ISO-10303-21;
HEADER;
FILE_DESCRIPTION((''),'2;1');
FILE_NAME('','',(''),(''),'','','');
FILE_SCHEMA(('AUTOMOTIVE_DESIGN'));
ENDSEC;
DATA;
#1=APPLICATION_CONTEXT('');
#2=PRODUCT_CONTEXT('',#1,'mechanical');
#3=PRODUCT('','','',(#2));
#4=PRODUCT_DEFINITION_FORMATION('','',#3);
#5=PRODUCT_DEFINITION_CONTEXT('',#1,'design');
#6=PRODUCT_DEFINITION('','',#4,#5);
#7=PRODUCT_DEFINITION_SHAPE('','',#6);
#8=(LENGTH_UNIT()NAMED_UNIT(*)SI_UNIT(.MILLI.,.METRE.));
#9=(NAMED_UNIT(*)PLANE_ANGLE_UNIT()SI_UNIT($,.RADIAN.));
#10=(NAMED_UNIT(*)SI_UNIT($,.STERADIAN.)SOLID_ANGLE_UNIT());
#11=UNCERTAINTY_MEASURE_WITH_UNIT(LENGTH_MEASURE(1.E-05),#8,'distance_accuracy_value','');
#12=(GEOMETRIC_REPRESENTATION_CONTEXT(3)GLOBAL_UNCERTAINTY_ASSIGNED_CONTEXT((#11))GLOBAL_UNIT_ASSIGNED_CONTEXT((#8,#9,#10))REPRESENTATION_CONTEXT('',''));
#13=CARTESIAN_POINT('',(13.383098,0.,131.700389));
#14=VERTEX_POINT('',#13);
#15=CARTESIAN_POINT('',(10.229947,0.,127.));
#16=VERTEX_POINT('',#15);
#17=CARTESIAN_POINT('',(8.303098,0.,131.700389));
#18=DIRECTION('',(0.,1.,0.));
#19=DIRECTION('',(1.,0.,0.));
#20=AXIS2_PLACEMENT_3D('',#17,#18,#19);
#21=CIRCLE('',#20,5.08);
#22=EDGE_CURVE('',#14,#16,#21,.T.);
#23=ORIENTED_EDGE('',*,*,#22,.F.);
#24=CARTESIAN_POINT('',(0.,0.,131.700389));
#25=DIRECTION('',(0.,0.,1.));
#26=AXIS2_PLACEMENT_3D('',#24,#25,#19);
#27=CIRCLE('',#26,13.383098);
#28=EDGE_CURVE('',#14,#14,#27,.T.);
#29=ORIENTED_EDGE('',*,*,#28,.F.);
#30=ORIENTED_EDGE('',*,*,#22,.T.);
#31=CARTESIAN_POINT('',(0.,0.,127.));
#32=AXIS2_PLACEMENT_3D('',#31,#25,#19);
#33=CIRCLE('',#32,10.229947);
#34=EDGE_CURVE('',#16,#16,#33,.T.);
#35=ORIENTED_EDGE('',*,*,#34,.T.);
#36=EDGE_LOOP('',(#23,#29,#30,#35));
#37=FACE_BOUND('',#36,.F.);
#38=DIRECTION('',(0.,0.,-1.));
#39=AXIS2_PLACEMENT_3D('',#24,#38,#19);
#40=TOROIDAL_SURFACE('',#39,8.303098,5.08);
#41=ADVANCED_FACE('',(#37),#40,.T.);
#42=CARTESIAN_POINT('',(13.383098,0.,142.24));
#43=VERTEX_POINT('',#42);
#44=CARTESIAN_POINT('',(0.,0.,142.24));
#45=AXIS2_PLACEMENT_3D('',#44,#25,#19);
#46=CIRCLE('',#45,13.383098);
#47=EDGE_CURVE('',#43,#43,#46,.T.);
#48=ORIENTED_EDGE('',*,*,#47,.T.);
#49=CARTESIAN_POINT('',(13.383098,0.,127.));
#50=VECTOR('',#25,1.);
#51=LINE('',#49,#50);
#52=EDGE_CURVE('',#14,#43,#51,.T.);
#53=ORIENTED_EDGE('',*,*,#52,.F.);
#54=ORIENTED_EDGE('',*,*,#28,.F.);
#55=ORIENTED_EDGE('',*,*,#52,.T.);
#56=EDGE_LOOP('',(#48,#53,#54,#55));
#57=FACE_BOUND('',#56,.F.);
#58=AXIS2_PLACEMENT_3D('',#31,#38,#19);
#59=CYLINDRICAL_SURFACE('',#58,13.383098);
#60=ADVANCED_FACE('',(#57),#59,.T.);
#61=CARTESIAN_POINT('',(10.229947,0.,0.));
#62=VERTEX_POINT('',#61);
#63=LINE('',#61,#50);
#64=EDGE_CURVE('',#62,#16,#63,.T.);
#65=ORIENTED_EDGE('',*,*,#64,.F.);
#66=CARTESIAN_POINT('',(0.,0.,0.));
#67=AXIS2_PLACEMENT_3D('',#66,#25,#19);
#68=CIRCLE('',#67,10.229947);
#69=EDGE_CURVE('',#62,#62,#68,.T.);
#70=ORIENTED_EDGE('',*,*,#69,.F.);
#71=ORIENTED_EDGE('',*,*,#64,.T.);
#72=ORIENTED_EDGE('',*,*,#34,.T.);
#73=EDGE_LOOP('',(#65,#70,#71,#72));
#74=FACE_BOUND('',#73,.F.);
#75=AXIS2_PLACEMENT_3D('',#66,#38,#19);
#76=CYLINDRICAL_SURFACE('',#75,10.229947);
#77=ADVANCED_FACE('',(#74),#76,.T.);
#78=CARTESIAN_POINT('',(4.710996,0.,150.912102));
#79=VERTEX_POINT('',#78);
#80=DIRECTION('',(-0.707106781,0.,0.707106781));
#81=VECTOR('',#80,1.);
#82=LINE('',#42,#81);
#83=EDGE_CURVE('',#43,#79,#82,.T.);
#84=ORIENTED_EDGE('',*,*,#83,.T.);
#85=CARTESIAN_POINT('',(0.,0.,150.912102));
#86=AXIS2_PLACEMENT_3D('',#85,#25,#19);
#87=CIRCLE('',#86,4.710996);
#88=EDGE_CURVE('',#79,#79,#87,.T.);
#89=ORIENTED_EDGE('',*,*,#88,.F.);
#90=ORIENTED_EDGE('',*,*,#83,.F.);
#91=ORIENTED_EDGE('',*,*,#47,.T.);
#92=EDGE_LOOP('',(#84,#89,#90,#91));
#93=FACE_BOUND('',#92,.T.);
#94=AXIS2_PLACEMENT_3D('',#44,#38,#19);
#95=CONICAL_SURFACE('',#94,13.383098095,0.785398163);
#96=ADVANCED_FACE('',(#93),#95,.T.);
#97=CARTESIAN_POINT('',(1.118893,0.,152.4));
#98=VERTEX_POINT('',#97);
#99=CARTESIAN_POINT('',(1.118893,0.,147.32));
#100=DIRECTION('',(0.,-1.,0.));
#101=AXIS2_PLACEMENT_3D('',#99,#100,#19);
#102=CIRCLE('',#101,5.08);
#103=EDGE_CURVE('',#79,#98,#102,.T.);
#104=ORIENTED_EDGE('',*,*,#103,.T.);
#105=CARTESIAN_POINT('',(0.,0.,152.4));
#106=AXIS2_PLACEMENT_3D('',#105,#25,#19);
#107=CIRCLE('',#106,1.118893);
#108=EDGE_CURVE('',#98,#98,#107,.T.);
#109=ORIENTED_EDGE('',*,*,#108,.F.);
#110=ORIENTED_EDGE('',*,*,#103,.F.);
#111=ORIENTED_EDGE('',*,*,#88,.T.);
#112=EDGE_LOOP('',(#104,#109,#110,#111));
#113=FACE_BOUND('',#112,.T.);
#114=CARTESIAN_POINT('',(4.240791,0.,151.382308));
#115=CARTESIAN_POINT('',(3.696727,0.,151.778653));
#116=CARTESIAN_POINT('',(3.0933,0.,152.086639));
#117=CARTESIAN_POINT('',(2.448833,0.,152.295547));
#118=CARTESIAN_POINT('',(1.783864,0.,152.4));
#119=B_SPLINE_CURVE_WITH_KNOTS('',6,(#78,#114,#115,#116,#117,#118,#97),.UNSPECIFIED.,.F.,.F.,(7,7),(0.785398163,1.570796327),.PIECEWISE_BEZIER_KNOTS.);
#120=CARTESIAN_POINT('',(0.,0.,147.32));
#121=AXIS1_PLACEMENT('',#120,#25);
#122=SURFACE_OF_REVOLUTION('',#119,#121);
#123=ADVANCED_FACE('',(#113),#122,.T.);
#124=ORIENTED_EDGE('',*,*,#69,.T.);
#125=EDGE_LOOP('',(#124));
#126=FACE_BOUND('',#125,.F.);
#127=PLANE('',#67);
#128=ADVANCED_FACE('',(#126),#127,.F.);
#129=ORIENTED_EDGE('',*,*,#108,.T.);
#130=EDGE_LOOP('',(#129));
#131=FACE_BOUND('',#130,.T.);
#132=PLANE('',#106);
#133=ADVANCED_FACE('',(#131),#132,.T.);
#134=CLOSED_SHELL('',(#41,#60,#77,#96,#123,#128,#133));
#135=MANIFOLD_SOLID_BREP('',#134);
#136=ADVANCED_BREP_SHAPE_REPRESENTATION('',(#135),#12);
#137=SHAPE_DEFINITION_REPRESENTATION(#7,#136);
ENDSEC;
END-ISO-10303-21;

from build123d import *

# Parameters (mm, degrees)
F4_R     = 10.2299469816
F0_DEPTH = 127
F1_R     = 13.3830980952
F5_DEPTH = 25.4
F3_SIZE  = 10.16
F6_R     = 5.08


# Not quite as in the source:
# - a fillet or chamfer that OpenCascade refuses, or shapes differently, is made with other operations: its cross-section is extruded or revolved along the edge and cut away or added


with BuildPart() as f0:
    # F4 (on Top) → F0 (new body)
    with BuildSketch(Plane.XY):
        Circle(F4_R)
    extrude(amount=F0_DEPTH)

    # F1 (on face) → F5 (join)
    with BuildSketch(Plane.XY.offset(127)):
        Circle(F1_R)
    extrude(amount=F5_DEPTH)

    # F2: fillet of radius 5.08 on 1 edges, made by hand

    # F2_s1 → F2_t2 (revolve, cut)
    with BuildSketch(Plane.XZ):
        with BuildLine():
            ThreePointArc((13.3830980952, 131.7003886402), (12.5217941226, 128.870370296), (10.2299469816, 127))
            Line((10.2299469816, 127), (13.3830980952, 127))
            Line((13.3830980952, 127), (13.3830980952, 131.7003886402))
        make_face()
    revolve(axis=Axis((0, 0, 127), (0, 0, 1)), mode=Mode.SUBTRACT)

    # F3
    f3_edges = [f0.edges().sort_by_distance(p)[0] for p in [
        (-13.383098, 0, 152.4),
    ]]
    chamfer(f3_edges, length=F3_SIZE)

    # F6
    f6_edges = [f0.edges().sort_by_distance(p)[0] for p in [
        (-3.223098, 0, 152.4),
    ]]
    fillet(f6_edges, radius=F6_R)


solid = f0.part
